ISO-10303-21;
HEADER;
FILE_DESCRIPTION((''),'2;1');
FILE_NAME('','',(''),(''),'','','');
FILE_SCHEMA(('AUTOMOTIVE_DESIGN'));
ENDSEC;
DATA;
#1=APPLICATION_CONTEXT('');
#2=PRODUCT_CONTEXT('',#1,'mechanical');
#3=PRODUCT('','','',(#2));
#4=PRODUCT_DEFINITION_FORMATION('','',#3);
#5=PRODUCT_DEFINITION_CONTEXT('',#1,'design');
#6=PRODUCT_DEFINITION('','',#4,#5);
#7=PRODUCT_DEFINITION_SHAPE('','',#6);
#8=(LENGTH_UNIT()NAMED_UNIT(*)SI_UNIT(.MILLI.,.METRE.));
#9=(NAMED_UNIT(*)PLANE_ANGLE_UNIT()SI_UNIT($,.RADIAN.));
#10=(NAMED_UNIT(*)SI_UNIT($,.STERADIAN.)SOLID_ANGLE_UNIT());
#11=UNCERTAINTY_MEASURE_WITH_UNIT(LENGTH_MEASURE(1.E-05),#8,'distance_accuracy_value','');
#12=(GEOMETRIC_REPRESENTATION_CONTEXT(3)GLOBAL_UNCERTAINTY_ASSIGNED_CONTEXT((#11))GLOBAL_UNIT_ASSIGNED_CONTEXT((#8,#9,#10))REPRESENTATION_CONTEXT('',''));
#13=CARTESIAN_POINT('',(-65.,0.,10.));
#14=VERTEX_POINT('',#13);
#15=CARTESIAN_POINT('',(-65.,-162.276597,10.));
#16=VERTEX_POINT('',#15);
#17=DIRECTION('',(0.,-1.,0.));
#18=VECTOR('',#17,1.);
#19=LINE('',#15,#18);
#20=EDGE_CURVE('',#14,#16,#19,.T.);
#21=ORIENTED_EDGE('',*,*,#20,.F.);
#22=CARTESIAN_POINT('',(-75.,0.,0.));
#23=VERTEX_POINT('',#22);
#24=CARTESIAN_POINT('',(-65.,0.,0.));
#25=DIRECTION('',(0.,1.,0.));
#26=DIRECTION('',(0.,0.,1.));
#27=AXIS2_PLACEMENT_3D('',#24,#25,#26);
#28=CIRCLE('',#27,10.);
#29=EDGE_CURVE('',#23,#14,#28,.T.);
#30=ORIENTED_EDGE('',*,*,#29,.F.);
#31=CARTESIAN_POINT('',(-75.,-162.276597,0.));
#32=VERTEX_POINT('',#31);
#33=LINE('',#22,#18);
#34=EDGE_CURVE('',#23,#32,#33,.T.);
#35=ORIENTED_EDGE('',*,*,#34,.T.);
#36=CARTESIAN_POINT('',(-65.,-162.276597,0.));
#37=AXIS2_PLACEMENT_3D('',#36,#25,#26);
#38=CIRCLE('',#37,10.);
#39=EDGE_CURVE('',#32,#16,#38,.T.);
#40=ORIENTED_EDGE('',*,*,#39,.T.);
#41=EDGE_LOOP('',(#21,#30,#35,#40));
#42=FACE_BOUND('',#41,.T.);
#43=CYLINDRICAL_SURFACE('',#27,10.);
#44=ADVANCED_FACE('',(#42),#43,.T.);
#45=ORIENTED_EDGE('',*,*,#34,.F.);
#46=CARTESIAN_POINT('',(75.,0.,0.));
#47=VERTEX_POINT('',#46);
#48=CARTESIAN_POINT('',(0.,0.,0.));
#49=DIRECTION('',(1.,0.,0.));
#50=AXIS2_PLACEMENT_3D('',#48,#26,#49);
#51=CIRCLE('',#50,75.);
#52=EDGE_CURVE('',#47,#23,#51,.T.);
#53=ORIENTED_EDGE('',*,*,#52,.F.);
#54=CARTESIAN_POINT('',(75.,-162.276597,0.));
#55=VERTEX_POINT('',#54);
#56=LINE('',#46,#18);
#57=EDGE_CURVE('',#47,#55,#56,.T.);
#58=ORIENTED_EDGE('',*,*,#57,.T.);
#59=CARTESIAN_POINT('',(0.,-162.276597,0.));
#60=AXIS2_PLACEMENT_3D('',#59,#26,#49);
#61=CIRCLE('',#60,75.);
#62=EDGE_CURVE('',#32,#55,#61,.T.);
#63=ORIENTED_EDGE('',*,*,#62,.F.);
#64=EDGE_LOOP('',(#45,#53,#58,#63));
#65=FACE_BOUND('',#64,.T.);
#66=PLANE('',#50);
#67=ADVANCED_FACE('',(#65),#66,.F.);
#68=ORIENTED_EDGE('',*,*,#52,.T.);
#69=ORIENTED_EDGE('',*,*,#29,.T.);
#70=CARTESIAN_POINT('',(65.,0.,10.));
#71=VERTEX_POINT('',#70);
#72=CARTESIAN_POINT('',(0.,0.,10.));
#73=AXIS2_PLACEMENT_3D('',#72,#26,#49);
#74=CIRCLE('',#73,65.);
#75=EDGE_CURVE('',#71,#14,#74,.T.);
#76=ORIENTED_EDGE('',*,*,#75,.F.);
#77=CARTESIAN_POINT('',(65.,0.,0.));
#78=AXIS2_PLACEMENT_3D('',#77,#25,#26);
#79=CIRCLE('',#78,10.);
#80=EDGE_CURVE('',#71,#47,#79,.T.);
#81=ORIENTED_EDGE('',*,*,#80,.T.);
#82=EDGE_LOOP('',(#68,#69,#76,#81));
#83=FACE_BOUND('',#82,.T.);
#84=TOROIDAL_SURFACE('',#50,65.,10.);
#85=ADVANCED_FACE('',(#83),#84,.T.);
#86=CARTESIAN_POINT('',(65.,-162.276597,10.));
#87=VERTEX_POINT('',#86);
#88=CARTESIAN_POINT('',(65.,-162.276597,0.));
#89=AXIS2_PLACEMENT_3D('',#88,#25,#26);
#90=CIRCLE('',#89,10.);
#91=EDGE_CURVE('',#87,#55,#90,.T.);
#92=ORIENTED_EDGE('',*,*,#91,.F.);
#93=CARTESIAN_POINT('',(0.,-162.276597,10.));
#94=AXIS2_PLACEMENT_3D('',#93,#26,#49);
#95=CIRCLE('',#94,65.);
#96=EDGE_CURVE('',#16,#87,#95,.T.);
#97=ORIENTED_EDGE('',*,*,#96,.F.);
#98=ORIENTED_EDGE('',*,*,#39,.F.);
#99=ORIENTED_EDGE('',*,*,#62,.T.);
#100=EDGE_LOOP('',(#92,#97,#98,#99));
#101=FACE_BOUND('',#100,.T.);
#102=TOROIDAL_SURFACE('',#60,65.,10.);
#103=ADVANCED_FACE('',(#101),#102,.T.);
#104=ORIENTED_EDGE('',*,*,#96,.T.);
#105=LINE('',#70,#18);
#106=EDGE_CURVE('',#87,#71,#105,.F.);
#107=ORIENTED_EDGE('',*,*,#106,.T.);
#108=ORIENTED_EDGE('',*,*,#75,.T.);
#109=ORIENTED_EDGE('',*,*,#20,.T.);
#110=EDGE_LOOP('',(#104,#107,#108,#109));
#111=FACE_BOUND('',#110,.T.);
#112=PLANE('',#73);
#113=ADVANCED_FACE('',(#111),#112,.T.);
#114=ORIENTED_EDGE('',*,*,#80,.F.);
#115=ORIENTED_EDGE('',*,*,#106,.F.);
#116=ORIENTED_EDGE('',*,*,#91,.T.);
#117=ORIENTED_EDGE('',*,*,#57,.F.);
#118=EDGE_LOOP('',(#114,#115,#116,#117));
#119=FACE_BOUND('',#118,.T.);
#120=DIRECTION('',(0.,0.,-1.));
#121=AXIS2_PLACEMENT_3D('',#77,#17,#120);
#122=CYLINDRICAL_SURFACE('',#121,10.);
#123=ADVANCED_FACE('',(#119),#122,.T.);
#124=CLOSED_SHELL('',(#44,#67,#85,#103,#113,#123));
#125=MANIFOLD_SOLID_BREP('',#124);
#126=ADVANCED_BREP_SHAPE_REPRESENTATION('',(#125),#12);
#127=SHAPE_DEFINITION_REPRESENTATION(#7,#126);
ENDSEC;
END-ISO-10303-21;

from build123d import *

# Parameters (mm, degrees)
BOSS_EXTRU_1_DEPTH = 10
CONG_1_R           = 10


with BuildPart() as part:
    # Esquisse1 → Boss.-Extru.1 (new body)
    with BuildSketch(Plane.XY):
        with BuildLine():
            ThreePointArc((75, 0), (0, -75), (-75, 0))
            Line((-75, 0), (-75, -162.276597369))
            ThreePointArc((-75, -162.276597369), (0, -87.276597369), (75, -162.276597369))
            Line((75, -162.276597369), (75, 0))
        make_face()
        with BuildLine():
            ThreePointArc((75, 0), (0, 75), (-75, 0))
            Line((-75, 0), (75, 0))
        make_face()
        with BuildLine():
            Line((75, 0), (-75, 0))
            ThreePointArc((-75, 0), (0, -75), (75, 0))
        make_face()
        with BuildLine():
            ThreePointArc((75, -162.276597369), (0, -87.276597369), (-75, -162.276597369))
            Line((-75, -162.276597369), (75, -162.276597369))
        make_face()
        with BuildLine():
            Line((75, -162.276597369), (-75, -162.276597369))
            ThreePointArc((-75, -162.276597369), (0, -237.276597369), (75, -162.276597369))
        make_face()
    extrude(amount=BOSS_EXTRU_1_DEPTH)

    # Congé1
    cong_1_edges = [part.edges().sort_by_distance(p)[0] for p in [
        (0, 75, 10),
        (75, -81.138298684, 10),
        (0, -237.276597369, 10),
        (-75, -81.138298684, 10),
    ]]
    fillet(cong_1_edges, radius=CONG_1_R - 0.0001)  # a hair under: the kernel refuses the full size


solid = part.part
